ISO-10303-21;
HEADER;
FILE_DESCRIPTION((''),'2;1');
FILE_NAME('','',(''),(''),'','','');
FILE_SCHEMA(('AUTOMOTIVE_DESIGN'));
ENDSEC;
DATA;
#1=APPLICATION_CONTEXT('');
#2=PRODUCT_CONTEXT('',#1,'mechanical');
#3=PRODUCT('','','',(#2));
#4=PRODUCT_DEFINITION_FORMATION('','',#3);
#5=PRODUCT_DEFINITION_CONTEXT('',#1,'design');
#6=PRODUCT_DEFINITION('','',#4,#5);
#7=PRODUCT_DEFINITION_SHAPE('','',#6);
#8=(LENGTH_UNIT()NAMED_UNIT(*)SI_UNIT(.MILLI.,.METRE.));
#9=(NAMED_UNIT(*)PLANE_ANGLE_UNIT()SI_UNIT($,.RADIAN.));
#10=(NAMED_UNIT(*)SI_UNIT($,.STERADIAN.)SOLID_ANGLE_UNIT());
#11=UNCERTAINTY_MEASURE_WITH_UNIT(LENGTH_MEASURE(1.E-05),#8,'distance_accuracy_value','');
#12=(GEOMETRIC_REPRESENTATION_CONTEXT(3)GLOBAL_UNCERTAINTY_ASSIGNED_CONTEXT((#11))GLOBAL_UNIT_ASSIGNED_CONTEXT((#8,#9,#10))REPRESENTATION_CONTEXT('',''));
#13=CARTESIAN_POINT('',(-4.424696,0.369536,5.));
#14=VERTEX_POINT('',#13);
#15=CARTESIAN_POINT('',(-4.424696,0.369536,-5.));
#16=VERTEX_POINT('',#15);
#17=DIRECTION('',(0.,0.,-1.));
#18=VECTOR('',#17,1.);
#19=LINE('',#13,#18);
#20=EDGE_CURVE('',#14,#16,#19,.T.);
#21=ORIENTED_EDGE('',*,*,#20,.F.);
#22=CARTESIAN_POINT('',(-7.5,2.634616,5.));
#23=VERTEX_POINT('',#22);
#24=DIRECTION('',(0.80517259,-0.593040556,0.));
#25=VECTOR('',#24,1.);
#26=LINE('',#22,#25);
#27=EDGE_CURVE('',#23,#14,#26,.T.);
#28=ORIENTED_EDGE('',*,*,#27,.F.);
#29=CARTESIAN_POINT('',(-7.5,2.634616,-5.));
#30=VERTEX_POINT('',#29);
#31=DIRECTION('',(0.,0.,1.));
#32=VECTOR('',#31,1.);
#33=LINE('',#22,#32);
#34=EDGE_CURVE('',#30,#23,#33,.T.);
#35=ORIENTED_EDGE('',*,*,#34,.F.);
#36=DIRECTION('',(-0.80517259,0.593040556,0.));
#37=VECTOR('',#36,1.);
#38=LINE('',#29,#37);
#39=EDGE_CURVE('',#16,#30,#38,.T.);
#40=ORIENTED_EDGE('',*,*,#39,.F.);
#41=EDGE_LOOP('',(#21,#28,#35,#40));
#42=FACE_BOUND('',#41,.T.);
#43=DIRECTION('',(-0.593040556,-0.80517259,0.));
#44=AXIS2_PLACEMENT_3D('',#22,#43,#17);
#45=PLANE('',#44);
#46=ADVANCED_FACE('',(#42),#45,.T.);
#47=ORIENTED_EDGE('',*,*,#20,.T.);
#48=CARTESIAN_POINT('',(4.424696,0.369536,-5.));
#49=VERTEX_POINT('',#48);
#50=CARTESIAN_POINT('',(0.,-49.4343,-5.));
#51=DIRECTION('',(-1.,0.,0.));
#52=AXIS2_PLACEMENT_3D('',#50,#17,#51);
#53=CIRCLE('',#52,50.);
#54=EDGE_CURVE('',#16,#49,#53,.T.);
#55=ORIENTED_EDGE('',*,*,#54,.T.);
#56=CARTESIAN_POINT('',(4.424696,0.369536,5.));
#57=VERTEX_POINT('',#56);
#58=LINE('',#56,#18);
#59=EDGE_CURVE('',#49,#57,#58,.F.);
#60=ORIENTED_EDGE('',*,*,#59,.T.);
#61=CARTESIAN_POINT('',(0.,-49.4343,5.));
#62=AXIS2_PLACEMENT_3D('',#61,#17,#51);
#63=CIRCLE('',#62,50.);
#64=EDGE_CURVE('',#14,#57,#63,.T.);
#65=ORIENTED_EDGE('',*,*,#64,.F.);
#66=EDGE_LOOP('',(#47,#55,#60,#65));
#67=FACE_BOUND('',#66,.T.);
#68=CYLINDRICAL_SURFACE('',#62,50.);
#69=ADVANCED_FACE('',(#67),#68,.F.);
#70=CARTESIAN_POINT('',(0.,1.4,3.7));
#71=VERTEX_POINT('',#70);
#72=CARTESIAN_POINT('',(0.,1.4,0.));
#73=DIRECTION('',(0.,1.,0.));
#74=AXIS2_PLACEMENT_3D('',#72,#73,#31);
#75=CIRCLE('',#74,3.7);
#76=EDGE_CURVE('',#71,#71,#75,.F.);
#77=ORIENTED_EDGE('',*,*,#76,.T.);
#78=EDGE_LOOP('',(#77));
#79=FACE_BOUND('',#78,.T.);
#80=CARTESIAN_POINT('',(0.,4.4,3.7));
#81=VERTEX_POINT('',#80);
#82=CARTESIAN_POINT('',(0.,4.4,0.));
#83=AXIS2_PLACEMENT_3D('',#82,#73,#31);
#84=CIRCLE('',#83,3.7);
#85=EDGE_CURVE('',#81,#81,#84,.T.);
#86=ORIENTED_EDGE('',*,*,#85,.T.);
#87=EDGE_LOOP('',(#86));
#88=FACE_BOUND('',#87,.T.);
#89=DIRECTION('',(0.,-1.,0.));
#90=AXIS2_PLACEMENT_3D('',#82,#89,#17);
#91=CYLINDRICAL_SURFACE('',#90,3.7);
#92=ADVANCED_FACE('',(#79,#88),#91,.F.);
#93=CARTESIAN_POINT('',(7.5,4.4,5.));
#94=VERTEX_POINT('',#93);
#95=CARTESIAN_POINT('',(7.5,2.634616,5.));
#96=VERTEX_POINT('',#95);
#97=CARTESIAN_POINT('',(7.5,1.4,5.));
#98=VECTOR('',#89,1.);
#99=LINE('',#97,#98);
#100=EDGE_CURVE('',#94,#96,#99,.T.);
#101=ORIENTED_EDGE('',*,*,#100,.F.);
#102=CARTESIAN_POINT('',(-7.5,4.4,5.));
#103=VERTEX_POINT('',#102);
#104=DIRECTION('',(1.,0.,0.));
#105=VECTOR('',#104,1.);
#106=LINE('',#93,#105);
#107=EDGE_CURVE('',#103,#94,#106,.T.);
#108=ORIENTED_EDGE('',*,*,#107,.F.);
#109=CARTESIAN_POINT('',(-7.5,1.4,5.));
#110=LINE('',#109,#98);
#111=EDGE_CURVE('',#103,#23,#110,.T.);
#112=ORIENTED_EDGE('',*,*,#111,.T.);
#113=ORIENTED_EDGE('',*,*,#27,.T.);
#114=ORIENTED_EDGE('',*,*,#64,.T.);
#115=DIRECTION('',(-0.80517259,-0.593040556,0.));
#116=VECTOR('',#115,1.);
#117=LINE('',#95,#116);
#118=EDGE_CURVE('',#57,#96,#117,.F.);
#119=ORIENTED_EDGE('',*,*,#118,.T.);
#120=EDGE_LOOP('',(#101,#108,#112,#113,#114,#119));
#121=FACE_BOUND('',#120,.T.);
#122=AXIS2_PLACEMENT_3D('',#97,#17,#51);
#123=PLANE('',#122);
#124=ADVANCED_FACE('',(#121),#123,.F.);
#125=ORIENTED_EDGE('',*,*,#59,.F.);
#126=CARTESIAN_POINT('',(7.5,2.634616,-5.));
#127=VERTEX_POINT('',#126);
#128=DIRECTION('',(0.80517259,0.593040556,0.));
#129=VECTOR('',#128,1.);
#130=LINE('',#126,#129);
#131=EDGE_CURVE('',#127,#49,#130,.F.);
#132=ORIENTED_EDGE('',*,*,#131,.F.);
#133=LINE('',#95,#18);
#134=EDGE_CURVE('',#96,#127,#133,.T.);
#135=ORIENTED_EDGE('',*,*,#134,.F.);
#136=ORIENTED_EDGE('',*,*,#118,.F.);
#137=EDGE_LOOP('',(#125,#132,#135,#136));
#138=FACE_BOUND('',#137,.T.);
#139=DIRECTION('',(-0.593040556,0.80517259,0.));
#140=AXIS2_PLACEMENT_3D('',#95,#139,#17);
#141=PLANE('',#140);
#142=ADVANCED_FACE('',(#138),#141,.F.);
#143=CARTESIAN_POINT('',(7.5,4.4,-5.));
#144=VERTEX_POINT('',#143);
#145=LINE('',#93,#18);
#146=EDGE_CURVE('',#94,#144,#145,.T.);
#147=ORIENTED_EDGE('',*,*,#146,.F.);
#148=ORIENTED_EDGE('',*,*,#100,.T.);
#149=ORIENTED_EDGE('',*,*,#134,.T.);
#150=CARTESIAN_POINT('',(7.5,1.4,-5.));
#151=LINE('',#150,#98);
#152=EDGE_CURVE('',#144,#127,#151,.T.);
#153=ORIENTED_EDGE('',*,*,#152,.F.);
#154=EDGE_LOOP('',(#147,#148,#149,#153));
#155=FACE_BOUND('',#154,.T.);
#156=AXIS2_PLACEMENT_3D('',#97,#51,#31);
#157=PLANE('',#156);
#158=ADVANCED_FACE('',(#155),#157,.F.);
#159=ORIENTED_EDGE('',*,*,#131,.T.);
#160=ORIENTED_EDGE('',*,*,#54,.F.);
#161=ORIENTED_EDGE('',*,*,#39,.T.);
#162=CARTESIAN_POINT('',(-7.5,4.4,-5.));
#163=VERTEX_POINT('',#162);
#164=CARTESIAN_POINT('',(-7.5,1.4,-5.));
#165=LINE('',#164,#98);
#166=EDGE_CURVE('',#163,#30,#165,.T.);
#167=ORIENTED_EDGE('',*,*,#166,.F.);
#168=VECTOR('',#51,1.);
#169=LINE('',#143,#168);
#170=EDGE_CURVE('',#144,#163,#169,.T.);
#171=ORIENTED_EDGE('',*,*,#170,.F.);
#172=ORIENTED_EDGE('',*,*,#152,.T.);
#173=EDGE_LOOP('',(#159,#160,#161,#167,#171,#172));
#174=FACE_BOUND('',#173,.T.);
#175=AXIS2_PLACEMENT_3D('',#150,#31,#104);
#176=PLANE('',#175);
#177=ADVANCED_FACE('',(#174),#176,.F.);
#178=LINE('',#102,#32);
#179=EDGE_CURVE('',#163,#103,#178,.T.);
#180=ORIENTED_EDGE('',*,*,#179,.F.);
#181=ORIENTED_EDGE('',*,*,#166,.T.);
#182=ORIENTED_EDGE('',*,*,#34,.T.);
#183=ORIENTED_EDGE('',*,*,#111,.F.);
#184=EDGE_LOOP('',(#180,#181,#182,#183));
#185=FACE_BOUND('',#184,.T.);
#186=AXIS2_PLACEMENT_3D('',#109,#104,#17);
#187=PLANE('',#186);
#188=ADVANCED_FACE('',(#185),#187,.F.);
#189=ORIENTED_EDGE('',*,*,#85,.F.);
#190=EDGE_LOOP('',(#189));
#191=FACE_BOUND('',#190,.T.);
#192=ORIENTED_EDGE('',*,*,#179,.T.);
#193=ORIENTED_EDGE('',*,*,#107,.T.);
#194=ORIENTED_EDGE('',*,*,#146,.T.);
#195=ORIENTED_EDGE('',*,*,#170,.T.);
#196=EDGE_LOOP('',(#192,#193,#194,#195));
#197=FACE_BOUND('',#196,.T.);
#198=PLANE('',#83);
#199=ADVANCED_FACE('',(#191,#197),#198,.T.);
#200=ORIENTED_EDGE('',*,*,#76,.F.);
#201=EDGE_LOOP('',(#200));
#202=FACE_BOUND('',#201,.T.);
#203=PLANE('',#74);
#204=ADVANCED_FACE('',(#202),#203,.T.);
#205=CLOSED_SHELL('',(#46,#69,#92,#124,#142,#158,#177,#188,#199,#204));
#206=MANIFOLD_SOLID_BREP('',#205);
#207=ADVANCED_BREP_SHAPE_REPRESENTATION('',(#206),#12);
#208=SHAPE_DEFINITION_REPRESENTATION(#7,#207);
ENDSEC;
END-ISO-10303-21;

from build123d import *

# Parameters (mm, degrees)
SKETCH1_W           = 15
SKETCH1_H           = 10
BOSS_EXTRUDE1_DEPTH = 1.4
SKETCH2_W           = 15
SKETCH2_H           = 10
SKETCH2_R           = 3.7
BOSS_EXTRUDE2_DEPTH = 3
CUT_EXTRUDE2_DEPTH  = 14.251792332
CHAMFER1_SIZE       = 2.634615696


with BuildPart() as part:
    # Sketch1 → Boss-Extrude1 (new body)
    with BuildSketch(Plane(origin=(0, 0, 0), x_dir=(1, 0, 0), z_dir=(0, 1, 0))):
        Rectangle(SKETCH1_W, SKETCH1_H)
    extrude(amount=BOSS_EXTRUDE1_DEPTH)

    # Sketch2 → Boss-Extrude2 (add)
    with BuildSketch(Plane(origin=(0, 1.4, 0), x_dir=(1, 0, 0), z_dir=(0, 1, 0))):
        Rectangle(SKETCH2_W, SKETCH2_H)
        with Locations(Location((0, 0, 0), (0, 0, 270))):
            Circle(SKETCH2_R, mode=Mode.SUBTRACT)
    extrude(amount=BOSS_EXTRUDE2_DEPTH)

    # Sketch5 → Cut-Extrude2 (cut, through all)
    with BuildSketch(Plane(origin=(0, 0, -5), x_dir=(-1, 0, 0), z_dir=(0, 0, -1))):
        with BuildLine():
            Line((7.5, 0), (-7.5, 0))
            ThreePointArc((-7.5, 0), (0, 0.565700167), (7.5, 0))
        make_face()
    extrude(amount=-CUT_EXTRUDE2_DEPTH, mode=Mode.SUBTRACT)

    # Chamfer1
    # the kernel refuses this chamfer: 3, 2.634615696 mm, written as the material it takes off along each edge
    with BuildSketch(Plane(origin=(7.5, 0, -12.964818141), x_dir=(-0.9928577476807653, 0.11930420307046066, 0), z_dir=(0, 0, 1)), Plane(origin=(-7.5, 0, 12.964818141), x_dir=(0.9928577476807653, 0.1193042030704611, 0), z_dir=(0, 0, -1))) as chamfer1_piece_1:
        with BuildLine():
            Line((3.097426723, 0), (CHAMFER1_SIZE * 0.119304203085, -CHAMFER1_SIZE * 0.992857747804))
            Line((CHAMFER1_SIZE * 0.119304203085, -CHAMFER1_SIZE * 0.992857747804), (0, 0))
            ThreePointArc((0, 0), (1.592490504, -0.023971722), (3.097426723, 0))
        make_face()
    extrude(amount=25.929636281, mode=Mode.SUBTRACT)


solid = part.part
